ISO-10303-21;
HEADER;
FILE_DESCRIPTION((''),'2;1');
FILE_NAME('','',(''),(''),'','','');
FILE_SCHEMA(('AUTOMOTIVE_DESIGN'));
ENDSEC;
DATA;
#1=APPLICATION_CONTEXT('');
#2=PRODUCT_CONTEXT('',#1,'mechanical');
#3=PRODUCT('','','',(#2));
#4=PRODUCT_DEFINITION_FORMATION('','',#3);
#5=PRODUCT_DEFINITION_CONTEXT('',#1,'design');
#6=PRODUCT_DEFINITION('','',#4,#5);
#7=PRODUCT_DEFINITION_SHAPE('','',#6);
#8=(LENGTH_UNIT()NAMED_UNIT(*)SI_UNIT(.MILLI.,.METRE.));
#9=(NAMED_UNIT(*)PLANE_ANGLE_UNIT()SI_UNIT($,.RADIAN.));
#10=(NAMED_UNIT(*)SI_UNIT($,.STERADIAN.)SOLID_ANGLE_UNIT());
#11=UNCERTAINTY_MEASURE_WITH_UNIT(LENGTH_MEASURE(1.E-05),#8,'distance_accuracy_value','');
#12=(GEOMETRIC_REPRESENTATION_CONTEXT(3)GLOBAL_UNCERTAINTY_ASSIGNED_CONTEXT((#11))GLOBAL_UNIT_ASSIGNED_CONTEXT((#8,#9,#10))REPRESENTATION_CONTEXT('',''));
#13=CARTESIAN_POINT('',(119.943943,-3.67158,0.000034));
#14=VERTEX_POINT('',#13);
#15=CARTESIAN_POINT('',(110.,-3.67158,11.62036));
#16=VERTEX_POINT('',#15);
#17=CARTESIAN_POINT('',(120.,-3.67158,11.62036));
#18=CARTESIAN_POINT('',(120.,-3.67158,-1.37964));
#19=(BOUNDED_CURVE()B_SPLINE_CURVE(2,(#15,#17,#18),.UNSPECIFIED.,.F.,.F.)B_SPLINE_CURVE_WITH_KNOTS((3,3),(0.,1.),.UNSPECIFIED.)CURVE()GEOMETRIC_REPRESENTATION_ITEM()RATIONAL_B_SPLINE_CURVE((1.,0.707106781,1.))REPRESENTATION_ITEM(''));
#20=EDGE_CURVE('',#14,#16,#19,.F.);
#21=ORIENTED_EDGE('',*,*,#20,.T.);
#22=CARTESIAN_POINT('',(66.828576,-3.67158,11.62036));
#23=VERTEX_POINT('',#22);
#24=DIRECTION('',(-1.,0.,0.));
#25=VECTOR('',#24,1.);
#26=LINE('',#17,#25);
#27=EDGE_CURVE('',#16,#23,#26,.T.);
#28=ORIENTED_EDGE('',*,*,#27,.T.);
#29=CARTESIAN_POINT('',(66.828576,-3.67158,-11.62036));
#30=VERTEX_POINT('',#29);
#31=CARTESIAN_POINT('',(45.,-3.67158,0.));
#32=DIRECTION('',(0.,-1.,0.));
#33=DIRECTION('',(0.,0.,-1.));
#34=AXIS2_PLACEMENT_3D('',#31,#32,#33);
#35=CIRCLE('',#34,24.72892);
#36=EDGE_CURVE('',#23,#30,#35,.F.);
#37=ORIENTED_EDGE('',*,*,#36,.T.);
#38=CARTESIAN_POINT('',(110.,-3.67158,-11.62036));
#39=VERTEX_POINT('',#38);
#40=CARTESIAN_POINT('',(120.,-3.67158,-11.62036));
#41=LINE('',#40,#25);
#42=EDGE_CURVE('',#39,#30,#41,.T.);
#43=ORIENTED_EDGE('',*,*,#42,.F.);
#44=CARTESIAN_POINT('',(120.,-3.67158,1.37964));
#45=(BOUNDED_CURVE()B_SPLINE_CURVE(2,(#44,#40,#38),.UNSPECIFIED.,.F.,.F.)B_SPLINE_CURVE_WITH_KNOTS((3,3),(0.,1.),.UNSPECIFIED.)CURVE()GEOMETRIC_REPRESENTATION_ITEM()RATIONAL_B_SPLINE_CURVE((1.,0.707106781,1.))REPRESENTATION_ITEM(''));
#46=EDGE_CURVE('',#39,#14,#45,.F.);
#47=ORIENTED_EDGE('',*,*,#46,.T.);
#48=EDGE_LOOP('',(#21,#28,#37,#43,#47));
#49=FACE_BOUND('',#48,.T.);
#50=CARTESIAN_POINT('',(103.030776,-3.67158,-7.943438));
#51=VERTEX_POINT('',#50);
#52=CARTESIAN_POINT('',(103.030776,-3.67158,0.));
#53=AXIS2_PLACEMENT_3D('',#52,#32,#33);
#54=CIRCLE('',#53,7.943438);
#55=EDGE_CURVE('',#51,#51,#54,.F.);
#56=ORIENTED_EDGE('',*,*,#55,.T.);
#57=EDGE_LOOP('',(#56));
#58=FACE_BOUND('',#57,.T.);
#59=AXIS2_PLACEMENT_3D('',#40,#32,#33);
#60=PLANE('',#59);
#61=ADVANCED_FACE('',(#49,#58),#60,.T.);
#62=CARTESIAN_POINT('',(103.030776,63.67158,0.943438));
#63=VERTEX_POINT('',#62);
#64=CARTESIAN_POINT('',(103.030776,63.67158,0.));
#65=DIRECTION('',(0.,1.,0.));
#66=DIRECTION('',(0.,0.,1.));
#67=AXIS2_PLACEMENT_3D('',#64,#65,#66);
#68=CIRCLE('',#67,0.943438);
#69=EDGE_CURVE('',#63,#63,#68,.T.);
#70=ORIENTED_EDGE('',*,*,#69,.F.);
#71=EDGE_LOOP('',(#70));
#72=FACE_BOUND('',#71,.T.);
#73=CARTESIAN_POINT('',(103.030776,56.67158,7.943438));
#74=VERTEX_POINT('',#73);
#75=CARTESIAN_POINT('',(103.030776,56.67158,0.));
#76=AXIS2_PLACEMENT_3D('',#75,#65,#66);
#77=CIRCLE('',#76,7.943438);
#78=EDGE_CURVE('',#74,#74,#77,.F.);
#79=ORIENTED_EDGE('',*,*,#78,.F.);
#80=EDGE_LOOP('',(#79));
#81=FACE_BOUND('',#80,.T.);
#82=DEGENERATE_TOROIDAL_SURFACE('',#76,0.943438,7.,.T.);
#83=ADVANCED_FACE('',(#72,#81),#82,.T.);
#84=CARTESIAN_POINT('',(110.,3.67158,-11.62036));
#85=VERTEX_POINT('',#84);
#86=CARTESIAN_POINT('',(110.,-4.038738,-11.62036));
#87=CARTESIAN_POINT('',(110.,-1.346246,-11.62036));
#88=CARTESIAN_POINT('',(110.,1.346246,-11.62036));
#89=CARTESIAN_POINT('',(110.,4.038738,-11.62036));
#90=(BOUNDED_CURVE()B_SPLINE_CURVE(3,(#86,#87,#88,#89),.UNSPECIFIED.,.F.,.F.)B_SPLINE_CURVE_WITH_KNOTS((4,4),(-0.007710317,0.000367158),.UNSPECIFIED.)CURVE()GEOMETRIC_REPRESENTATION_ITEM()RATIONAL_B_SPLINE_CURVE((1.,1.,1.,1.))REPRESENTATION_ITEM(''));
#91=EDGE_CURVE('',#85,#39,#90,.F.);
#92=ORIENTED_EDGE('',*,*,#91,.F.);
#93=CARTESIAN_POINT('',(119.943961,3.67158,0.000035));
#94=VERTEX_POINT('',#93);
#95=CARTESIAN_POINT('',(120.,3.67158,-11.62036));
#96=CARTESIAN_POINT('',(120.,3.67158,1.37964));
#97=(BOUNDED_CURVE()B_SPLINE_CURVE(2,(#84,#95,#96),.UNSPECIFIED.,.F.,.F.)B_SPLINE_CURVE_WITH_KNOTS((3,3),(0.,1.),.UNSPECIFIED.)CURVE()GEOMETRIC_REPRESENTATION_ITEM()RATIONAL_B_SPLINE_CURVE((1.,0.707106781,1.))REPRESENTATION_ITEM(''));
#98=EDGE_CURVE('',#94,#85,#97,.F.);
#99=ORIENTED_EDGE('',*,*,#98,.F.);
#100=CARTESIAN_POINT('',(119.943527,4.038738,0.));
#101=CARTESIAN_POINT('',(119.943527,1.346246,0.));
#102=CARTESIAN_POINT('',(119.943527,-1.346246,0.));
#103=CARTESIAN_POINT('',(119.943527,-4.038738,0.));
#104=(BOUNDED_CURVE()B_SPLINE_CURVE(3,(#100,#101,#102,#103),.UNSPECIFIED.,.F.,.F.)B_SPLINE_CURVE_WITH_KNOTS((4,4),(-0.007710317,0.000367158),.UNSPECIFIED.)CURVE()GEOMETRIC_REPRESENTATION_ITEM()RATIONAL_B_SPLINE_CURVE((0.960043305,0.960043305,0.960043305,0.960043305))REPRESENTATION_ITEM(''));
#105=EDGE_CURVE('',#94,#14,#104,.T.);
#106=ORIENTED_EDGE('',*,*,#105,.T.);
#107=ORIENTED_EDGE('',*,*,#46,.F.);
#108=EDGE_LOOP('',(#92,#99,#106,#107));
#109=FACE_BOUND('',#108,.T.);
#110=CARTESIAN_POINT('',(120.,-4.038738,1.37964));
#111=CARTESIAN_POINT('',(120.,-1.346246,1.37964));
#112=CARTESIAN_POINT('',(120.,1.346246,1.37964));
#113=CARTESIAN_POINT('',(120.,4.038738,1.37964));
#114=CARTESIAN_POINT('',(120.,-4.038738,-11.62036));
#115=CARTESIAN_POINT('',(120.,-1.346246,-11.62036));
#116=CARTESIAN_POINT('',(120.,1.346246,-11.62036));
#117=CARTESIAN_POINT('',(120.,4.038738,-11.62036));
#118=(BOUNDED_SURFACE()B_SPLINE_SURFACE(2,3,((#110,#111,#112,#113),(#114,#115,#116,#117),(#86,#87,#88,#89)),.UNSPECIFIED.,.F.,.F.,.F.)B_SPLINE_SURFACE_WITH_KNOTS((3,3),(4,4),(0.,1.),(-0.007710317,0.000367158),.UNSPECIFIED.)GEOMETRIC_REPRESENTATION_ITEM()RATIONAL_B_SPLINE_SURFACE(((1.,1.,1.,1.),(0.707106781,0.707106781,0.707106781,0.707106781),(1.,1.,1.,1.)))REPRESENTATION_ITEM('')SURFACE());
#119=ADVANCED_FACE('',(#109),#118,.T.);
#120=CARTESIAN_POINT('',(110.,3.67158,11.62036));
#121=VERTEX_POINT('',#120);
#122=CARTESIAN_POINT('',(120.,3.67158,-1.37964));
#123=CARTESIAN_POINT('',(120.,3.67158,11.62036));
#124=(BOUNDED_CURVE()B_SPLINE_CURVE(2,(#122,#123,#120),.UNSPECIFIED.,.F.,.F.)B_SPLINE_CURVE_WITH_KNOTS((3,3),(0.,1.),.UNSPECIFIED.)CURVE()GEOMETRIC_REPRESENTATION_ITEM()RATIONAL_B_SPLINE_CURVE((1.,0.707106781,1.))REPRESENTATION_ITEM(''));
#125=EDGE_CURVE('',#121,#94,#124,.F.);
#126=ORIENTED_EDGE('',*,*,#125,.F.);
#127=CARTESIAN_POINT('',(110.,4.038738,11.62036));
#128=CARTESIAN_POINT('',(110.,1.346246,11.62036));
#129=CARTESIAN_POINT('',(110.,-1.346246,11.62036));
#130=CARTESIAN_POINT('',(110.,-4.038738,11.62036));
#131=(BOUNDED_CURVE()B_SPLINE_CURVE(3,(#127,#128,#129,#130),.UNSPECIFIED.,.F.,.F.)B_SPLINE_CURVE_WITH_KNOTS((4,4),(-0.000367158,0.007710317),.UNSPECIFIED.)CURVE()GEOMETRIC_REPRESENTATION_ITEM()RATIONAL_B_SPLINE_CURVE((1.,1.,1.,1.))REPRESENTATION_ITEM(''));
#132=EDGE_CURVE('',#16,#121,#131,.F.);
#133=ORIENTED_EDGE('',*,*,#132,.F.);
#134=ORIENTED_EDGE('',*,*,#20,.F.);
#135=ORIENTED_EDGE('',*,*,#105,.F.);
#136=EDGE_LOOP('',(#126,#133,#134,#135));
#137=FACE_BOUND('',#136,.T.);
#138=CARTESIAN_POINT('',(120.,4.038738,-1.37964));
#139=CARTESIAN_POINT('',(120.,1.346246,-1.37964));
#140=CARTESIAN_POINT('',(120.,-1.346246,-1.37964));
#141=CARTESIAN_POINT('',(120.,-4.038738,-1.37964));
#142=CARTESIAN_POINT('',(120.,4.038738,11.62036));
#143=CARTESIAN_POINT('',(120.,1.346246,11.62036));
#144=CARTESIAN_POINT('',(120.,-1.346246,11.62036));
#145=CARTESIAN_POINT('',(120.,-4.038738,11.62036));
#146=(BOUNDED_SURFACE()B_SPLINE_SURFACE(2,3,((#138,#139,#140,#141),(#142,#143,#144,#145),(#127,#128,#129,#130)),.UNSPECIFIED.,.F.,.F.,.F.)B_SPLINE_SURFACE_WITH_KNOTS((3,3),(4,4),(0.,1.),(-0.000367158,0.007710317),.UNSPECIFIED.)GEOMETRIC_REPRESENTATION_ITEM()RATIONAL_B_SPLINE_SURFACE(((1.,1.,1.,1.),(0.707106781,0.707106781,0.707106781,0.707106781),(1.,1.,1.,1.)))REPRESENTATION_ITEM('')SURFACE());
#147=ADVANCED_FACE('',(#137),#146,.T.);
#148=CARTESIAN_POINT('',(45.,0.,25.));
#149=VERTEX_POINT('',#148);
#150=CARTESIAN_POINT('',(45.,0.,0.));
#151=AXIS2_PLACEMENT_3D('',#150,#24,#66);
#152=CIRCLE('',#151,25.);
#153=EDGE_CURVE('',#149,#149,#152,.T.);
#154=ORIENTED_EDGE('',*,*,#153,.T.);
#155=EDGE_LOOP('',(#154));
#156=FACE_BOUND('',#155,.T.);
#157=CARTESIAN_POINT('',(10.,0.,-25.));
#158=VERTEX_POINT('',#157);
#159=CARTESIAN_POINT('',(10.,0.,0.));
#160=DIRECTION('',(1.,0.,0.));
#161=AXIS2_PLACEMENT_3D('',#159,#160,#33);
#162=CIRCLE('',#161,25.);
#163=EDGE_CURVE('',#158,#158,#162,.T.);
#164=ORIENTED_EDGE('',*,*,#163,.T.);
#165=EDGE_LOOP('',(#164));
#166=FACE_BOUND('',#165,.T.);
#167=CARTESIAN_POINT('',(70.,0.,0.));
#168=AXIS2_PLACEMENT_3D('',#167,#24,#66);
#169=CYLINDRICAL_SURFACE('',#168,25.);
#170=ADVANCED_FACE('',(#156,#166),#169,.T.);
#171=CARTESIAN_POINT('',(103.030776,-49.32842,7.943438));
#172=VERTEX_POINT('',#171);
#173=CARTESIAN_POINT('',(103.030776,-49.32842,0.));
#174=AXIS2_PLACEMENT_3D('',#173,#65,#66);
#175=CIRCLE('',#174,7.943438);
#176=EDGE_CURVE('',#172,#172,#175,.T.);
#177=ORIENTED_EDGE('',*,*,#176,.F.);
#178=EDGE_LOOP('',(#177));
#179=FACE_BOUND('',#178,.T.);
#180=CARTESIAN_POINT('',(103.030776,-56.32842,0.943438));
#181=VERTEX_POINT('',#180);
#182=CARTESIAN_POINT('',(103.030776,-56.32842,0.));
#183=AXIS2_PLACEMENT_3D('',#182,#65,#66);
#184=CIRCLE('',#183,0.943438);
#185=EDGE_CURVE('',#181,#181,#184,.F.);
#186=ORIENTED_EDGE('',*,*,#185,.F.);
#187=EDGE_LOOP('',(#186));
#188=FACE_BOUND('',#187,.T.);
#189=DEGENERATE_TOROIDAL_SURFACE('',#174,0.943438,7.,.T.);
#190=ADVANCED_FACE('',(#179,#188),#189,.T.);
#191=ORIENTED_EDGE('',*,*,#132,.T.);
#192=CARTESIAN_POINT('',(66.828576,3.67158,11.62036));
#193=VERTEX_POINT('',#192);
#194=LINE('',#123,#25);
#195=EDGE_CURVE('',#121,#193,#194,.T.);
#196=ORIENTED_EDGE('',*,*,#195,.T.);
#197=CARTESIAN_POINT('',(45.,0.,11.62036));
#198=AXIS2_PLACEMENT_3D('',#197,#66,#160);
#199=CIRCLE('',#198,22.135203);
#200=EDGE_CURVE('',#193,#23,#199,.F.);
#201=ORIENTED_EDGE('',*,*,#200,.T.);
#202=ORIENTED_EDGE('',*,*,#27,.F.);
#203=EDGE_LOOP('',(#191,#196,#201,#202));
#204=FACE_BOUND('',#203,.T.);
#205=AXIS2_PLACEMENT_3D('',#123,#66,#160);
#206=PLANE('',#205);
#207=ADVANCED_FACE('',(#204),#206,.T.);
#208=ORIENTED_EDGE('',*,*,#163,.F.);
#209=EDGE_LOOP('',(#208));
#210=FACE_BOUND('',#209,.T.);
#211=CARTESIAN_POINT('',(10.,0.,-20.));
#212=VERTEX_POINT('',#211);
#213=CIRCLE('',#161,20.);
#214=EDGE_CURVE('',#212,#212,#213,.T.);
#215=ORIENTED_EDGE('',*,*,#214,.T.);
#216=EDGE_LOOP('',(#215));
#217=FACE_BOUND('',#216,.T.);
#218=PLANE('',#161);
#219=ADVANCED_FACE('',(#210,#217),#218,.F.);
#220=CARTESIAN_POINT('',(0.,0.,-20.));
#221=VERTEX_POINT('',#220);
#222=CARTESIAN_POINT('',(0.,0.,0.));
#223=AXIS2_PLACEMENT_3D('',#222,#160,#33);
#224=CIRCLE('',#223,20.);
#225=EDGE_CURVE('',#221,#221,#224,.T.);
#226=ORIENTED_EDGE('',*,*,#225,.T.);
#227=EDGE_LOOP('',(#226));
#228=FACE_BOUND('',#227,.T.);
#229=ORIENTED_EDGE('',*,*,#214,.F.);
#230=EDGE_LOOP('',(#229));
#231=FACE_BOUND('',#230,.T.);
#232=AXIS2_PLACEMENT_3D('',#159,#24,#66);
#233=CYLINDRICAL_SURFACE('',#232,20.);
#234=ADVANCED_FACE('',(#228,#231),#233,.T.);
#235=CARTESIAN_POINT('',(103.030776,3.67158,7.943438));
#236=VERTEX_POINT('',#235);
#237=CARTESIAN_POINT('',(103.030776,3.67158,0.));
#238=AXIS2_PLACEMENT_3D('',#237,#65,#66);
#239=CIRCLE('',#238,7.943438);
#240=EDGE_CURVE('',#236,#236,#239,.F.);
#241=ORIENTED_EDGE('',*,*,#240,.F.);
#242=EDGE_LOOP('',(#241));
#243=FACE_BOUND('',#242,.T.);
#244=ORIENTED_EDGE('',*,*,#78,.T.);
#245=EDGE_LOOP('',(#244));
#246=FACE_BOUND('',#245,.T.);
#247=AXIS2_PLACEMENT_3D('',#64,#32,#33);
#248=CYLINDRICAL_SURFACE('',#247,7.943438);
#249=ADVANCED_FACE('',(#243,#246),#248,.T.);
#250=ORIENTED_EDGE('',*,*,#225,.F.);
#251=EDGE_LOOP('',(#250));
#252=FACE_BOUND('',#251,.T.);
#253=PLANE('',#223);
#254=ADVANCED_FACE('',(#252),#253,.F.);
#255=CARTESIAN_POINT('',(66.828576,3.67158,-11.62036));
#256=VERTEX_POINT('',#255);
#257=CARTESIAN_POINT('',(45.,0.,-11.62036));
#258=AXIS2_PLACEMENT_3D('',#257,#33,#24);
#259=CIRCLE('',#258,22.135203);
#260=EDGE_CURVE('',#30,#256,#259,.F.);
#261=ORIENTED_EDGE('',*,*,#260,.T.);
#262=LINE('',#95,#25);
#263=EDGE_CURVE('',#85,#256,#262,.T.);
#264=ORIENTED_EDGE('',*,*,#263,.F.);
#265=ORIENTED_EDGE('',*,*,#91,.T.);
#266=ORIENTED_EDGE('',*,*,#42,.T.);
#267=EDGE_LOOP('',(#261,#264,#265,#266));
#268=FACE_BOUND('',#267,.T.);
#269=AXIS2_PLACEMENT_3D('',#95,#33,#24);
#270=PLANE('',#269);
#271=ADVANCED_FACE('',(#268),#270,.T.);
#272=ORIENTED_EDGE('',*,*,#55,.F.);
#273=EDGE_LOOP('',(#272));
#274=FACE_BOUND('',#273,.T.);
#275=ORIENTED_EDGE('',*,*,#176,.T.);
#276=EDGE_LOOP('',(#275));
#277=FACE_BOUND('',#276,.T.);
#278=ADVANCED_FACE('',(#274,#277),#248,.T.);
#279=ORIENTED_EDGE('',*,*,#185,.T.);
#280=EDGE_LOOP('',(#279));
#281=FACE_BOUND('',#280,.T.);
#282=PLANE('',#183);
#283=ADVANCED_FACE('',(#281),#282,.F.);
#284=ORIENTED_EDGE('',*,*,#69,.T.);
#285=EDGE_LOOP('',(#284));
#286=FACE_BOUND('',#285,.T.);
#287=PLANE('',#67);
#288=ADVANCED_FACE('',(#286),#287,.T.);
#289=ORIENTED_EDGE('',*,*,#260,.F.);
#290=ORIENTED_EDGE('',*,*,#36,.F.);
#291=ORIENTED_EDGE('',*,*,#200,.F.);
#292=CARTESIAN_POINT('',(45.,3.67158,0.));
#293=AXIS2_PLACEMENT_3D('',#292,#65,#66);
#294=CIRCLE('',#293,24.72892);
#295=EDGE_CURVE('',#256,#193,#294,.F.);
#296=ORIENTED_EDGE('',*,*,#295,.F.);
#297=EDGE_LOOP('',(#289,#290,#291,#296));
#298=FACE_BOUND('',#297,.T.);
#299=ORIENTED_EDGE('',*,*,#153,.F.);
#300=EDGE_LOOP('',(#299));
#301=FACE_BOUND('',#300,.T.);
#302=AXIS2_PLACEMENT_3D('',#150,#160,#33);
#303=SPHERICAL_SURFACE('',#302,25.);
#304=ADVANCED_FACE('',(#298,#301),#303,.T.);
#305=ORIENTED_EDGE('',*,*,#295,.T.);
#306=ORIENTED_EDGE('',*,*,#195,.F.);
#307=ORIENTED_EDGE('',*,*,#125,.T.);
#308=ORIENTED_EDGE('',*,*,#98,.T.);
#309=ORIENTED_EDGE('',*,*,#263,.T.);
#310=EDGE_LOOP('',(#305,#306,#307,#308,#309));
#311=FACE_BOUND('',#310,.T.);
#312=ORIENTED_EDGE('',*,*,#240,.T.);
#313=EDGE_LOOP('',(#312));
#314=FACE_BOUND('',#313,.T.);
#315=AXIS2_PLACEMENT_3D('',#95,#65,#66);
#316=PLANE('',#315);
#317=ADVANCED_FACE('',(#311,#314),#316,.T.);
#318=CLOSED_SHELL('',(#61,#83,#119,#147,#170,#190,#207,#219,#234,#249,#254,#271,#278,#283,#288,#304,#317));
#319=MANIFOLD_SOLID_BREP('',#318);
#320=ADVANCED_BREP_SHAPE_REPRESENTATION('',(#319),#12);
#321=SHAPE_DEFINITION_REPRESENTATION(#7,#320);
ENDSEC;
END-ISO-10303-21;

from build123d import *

# Parameters (mm, degrees)
SKETCH1_R           = 20
BOSS_EXTRUDE1_DEPTH = 10
SKETCH2_R           = 25
BOSS_EXTRUDE2_DEPTH = 60
FILLET1_R           = 25
SKETCH3_W           = 23.240720894
SKETCH3_H           = 7.34315937
BOSS_EXTRUDE3_DEPTH = 120
SKETCH4_R           = 7.943437771
BOSS_EXTRUDE4_DEPTH = 60
FILLET2_R           = 7
FILLET3_R           = 7
FILLET4_SIZE        = 10
FILLET4_SIZE_2      = 13


with BuildPart() as part:
    # Sketch1 → Boss-Extrude1 (new body)
    with BuildSketch(Plane(origin=(0, 0, 0), x_dir=(0, 0, -1), z_dir=(1, 0, 0))):
        Circle(SKETCH1_R)
    extrude(amount=BOSS_EXTRUDE1_DEPTH)

    # Sketch2 → Boss-Extrude2 (add)
    with BuildSketch(Plane(origin=(10, 0, 0), x_dir=(0, 0, -1), z_dir=(1, 0, 0))):
        Circle(SKETCH2_R)
    extrude(amount=BOSS_EXTRUDE2_DEPTH)

    # Fillet1
    fillet1_edges = [part.edges().sort_by_distance(p)[0] for p in [
        (70, 0, 25),
    ]]
    fillet(fillet1_edges, radius=FILLET1_R)

    # Sketch3 → Boss-Extrude3 (add)
    with BuildSketch(Plane.ZY):
        Rectangle(SKETCH3_W, SKETCH3_H)
    extrude(amount=-BOSS_EXTRUDE3_DEPTH)

    # Sketch4 → Boss-Extrude4 (add, symmetric)
    with BuildSketch(Plane(origin=(0, 3.671579685, 0), x_dir=(1, 0, 0), z_dir=(0, 1, 0))):
        with Locations(Location((103.030776269, 0, 0), (0, 0, 270))):
            Circle(SKETCH4_R)
    extrude(amount=BOSS_EXTRUDE4_DEPTH, both=True)

    # Fillet2
    fillet2_edges = [part.edges().sort_by_distance(p)[0] for p in [
        (103.030776269, 63.671579685, -7.943437771),
    ]]
    fillet(fillet2_edges, radius=FILLET2_R)

    # Fillet3
    fillet3_edges = [part.edges().sort_by_distance(p)[0] for p in [
        (103.030776269, -56.328420315, -7.943437771),
    ]]
    fillet(fillet3_edges, radius=FILLET3_R)

    # Fillet4
    # an asymmetric fillet: 13, 10 mm, written as the material it takes off along each edge
    with BuildSketch(Plane(origin=(120, -36.171579685, -11.620360447), x_dir=(-1, 0, 0), z_dir=(0, 1, 0)), Plane(origin=(120, 36.171579685, 11.620360447), x_dir=(-1, 0, 0), z_dir=(0, -1, 0))) as fillet4_piece_1:
        with BuildLine():
            Bezier((FILLET4_SIZE, 0), (0, 0), (0, FILLET4_SIZE_2), weights=[1, 0.707106781, 1])
            Line((0, FILLET4_SIZE_2), (0, 0))
            Line((0, 0), (FILLET4_SIZE, 0))
        make_face()
    extrude(amount=72.34315937, mode=Mode.SUBTRACT)


solid = part.part
